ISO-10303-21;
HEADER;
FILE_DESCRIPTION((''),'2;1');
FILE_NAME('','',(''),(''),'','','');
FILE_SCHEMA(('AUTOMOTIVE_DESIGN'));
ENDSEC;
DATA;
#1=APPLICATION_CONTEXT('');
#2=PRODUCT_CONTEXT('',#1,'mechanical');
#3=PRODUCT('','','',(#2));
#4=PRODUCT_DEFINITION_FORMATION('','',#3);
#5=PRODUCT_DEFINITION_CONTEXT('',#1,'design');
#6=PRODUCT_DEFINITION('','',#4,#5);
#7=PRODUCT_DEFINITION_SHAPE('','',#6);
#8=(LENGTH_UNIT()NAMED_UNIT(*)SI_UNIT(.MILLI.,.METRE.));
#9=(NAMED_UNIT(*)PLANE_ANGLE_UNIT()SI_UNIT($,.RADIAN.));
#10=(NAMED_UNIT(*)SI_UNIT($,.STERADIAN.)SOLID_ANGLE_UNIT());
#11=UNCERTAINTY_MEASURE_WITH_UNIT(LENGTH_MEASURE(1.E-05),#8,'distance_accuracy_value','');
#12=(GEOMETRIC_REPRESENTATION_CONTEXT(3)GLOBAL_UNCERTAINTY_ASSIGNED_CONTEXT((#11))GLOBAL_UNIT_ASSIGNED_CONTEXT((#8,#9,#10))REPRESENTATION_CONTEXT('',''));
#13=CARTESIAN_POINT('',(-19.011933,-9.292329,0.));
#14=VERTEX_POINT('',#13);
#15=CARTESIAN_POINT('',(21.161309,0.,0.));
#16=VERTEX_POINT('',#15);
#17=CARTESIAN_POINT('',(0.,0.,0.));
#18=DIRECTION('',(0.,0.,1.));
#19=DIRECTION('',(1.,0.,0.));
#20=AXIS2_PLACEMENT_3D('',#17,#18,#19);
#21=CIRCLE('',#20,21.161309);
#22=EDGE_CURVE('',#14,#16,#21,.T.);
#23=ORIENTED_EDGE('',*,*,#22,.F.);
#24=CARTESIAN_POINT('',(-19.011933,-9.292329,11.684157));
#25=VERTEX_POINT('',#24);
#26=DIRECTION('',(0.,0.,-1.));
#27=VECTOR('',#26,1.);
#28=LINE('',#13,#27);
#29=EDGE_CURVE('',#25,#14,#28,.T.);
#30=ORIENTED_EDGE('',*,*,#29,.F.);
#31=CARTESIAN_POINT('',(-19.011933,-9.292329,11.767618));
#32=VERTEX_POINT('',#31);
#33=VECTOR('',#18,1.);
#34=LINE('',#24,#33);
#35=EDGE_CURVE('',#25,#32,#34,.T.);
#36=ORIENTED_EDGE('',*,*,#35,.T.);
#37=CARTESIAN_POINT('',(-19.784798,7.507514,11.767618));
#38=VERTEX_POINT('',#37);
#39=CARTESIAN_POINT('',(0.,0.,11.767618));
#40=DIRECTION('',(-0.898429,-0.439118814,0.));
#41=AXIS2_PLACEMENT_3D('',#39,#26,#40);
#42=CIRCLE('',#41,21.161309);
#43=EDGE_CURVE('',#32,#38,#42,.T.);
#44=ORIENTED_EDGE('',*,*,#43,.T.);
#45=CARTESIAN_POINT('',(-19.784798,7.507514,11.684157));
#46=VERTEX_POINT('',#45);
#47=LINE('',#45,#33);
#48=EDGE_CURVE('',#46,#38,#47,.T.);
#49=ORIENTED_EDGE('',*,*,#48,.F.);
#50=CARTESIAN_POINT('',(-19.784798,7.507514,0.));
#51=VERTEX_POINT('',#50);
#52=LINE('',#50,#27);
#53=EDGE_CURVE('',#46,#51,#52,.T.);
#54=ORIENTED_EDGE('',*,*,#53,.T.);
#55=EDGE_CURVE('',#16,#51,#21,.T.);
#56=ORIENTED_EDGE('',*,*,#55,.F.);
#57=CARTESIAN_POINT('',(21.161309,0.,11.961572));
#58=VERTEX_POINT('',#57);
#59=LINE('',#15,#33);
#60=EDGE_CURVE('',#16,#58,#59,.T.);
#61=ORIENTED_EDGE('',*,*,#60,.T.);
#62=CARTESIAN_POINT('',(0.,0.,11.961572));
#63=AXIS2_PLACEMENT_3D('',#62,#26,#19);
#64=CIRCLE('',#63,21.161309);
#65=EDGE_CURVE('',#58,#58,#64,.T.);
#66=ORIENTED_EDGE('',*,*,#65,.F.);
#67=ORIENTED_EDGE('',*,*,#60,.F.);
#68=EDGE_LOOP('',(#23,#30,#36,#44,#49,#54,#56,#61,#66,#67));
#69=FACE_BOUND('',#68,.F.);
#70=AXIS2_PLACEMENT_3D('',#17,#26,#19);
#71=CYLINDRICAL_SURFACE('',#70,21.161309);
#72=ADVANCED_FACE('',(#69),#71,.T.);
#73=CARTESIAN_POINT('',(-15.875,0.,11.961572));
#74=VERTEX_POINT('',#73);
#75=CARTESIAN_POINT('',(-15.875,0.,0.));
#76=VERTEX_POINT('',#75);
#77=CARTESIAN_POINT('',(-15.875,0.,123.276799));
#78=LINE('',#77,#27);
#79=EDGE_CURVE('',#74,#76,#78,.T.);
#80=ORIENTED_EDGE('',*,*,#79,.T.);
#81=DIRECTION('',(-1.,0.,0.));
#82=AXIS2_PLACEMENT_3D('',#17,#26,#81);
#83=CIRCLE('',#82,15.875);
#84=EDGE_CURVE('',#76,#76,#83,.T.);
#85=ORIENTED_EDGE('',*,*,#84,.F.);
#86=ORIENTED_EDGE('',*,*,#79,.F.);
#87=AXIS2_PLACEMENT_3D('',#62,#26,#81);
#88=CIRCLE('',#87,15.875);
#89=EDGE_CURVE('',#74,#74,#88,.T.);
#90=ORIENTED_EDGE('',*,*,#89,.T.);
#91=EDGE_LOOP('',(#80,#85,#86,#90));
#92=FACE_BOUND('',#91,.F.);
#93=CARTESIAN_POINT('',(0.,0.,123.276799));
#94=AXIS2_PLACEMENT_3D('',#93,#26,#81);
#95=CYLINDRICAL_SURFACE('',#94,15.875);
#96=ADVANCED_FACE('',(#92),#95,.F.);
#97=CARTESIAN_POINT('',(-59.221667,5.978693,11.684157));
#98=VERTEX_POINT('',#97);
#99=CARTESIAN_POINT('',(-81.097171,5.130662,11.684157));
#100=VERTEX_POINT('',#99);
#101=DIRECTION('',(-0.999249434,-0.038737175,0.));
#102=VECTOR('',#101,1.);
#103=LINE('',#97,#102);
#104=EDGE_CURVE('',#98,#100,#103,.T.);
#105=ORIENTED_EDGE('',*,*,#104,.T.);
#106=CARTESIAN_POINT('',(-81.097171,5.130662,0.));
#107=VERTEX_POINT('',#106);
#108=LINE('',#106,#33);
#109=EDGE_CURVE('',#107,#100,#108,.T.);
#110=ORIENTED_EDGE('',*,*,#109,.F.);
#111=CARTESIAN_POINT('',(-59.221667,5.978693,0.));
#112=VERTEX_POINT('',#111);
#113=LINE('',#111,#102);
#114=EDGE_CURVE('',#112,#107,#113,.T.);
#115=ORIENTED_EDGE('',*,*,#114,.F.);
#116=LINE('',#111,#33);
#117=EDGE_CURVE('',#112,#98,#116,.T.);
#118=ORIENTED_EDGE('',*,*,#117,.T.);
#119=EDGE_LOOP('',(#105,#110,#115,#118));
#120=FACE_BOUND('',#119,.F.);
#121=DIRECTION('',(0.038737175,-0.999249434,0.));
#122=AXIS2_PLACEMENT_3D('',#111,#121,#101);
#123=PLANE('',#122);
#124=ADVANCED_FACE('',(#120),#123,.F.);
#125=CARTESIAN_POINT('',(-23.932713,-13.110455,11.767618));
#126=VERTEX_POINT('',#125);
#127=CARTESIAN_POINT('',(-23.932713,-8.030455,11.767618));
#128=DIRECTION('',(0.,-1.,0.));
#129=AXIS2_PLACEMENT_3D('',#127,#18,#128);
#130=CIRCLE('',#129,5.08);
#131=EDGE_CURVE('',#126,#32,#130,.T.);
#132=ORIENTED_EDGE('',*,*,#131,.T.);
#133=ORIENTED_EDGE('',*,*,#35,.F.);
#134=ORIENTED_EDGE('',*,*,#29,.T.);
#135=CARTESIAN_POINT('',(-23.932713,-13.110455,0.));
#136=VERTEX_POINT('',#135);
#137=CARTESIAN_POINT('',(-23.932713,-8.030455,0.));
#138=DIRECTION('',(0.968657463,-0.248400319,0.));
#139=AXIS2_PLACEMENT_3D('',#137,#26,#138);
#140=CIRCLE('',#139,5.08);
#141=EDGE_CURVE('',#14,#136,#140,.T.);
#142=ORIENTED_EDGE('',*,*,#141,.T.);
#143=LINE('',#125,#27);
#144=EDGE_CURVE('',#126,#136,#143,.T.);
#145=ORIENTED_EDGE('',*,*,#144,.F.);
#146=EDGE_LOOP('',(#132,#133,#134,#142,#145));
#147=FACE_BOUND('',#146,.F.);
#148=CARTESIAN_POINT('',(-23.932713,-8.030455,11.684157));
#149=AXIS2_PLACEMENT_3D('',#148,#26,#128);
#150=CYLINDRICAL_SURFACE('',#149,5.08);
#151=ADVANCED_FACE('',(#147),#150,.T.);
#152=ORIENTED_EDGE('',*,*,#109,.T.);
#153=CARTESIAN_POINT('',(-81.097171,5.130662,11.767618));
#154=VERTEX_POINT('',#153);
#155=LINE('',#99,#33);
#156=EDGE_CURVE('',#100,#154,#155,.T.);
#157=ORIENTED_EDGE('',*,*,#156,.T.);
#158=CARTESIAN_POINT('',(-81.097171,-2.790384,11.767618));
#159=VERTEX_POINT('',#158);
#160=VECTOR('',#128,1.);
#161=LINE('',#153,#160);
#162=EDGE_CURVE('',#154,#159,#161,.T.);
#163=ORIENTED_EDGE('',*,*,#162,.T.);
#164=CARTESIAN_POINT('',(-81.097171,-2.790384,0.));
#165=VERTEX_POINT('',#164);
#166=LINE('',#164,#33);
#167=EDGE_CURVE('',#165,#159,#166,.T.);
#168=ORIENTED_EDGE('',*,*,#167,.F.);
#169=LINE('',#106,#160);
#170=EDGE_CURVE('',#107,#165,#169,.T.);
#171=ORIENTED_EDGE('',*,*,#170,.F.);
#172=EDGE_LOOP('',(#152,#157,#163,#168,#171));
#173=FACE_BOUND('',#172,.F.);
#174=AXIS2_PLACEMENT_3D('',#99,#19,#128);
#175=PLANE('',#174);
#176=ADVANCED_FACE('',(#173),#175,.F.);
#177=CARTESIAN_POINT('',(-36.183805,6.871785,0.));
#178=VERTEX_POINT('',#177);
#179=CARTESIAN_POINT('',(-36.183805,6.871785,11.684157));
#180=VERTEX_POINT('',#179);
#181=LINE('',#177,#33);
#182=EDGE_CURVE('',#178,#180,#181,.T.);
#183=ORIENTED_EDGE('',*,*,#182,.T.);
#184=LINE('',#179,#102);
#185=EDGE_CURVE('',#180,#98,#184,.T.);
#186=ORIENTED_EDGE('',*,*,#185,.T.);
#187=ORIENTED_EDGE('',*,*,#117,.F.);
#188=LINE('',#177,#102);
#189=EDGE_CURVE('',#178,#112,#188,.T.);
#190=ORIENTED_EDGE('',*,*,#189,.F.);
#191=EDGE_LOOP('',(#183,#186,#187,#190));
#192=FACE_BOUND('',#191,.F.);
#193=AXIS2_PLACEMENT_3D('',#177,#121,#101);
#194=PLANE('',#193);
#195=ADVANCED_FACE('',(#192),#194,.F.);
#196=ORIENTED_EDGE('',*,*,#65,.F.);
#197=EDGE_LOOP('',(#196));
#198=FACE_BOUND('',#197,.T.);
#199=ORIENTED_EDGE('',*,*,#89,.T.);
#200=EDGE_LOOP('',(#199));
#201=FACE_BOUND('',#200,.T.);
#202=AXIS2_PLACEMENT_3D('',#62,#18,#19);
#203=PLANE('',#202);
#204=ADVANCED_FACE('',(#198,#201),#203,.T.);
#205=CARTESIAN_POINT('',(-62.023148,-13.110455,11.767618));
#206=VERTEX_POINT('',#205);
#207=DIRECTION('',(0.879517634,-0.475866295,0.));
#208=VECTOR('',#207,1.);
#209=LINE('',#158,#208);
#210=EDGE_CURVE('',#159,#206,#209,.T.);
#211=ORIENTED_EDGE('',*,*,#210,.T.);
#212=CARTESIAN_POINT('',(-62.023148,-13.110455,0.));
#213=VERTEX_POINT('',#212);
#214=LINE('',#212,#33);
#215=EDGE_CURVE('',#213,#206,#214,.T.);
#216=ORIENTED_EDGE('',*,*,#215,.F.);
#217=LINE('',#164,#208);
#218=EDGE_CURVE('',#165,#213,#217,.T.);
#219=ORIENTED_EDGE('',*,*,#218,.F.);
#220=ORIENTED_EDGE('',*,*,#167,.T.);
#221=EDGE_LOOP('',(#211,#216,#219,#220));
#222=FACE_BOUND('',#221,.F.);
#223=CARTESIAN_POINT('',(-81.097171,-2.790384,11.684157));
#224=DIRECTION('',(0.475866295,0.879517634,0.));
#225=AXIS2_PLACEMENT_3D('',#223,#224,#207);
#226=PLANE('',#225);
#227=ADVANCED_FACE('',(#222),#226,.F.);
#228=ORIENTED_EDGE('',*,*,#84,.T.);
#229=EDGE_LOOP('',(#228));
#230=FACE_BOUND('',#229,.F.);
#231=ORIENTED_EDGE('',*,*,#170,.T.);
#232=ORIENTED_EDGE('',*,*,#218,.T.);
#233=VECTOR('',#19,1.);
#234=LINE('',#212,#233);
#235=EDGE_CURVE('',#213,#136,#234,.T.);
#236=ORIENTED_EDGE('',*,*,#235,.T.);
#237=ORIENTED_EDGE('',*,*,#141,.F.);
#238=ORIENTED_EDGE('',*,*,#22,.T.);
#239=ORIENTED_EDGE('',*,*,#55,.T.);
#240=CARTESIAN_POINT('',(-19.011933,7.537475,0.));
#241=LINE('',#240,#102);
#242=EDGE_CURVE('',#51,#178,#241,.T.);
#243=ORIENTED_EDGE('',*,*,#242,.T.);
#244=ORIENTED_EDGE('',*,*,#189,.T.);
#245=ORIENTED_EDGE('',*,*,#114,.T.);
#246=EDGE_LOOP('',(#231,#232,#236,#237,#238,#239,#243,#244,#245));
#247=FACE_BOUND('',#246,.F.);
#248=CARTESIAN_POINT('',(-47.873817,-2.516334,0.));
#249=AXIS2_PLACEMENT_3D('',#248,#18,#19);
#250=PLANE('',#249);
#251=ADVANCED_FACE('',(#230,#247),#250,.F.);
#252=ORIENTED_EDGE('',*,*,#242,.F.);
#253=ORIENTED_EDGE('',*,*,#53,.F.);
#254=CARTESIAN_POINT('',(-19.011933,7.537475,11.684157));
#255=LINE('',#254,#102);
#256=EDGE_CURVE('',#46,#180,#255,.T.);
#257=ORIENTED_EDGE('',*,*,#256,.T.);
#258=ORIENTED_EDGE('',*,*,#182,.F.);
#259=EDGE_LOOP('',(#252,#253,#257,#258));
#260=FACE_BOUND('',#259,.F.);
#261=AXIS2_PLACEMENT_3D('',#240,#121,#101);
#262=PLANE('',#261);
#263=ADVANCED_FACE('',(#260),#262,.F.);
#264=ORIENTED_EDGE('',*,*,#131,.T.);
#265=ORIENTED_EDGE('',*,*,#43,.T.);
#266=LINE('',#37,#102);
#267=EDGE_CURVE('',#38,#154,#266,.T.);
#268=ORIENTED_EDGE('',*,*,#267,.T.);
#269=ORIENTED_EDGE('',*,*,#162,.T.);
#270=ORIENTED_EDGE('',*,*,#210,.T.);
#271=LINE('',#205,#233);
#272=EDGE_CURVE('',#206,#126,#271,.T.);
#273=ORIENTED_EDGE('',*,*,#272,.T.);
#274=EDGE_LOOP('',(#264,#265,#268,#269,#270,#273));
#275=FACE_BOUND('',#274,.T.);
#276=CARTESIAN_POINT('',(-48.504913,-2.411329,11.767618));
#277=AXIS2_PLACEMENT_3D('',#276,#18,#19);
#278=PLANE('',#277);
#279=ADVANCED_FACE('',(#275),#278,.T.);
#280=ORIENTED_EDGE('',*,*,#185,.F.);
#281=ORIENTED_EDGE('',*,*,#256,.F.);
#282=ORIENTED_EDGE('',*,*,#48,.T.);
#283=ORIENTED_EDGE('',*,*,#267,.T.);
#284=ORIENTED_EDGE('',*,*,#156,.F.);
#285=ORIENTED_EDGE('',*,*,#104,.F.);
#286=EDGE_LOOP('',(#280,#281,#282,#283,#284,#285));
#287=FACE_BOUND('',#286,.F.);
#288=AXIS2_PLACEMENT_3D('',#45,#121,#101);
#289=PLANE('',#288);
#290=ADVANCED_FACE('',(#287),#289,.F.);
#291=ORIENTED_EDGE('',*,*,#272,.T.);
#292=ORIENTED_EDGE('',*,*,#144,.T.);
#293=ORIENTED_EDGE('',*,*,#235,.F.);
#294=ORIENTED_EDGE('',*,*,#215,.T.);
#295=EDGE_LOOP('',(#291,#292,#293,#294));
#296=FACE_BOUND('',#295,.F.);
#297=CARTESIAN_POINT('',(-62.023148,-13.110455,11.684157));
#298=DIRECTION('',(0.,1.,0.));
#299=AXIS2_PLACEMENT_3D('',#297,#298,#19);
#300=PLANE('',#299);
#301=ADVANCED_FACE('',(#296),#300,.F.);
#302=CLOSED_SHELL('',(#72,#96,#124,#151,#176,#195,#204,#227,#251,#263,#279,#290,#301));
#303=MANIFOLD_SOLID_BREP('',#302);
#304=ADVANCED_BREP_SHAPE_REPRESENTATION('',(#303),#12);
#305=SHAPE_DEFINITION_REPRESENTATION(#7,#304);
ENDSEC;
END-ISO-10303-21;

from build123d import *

# Parameters (mm, degrees)
F0_R        = 21.1613086429
F1_DEPTH    = 11.9615718722
F3_DEPTH    = 11.6841569543
F4_T1_DEPTH = 36.288056526
F6_DEPTH    = 0.0834609382
F10_D       = 31.75


# Not quite as in the source:
# - a fillet or chamfer that OpenCascade refuses, or shapes differently, is made with other operations: its cross-section is extruded or revolved along the edge and cut away or added
# - the program builds the solid bodies; features that only make, move or delete a surface that nothing else refers to are left out


with BuildPart() as f1:
    # F0 (on Top) → F1 (new body)
    with BuildSketch(Plane.XY):
        Circle(F0_R)
    extrude(amount=F1_DEPTH)

    # F2 (on Top) → F3 (join)
    with BuildSketch(Plane.XY):
        Polygon((-19.0119333565, -13.1104551256), (-19.0119333565, 7.5374748558), (-36.1838054091, 6.8717853914), (-59.2216673993, 5.9786933651), (-81.0971707106, 5.1306616515), (-81.0971707106, -2.7903839946), (-62.0231479406, -13.1104551256), align=None)
    extrude(amount=F3_DEPTH)

    # F4: fillet of radius 5.08 on 1 edges, made by hand

    # F4_s2 → F4_t1 (cut)
    with BuildSketch(Plane.XY.offset(-12.3019497859)):
        with BuildLine():
            ThreePointArc((-19.0119333565, -9.2923287462), (-20.8185454842, -12.0439771445), (-23.9327132709, -13.1104551256))
            Line((-23.9327132709, -13.1104551256), (-19.0119333565, -13.1104551256))
            Line((-19.0119333565, -13.1104551256), (-19.0119333565, -9.2923287462))
        make_face()
    extrude(amount=F4_T1_DEPTH, mode=Mode.SUBTRACT)

    # F5 (on face) → F6 (join)
    with BuildSketch(Plane.XY.offset(11.6841569543)):
        with BuildLine():
            ThreePointArc((-19.0119333565, -9.2923287462), (-21.1389513114, -0.9724818434), (-19.7847977051, 7.5075137862))
            Line((-19.7847977051, 7.5075137862), (-81.0971707106, 5.1306616515))
            Line((-81.0971707106, 5.1306616515), (-81.0971707106, -2.7903839946))
            Line((-81.0971707106, -2.7903839946), (-62.0231479406, -13.1104551256))
            Line((-62.0231479406, -13.1104551256), (-23.9327132709, -13.1104551256))
            ThreePointArc((-23.9327132709, -13.1104551256), (-20.8185454842, -12.0439771445), (-19.0119333565, -9.2923287462))
        make_face()
    extrude(amount=F6_DEPTH)

    # F10 (through all)
    with Locations(Plane.XY.offset(11.9615718722)):
        with Locations((0, 0)):
            Hole(F10_D / 2)


solid = f1.part
